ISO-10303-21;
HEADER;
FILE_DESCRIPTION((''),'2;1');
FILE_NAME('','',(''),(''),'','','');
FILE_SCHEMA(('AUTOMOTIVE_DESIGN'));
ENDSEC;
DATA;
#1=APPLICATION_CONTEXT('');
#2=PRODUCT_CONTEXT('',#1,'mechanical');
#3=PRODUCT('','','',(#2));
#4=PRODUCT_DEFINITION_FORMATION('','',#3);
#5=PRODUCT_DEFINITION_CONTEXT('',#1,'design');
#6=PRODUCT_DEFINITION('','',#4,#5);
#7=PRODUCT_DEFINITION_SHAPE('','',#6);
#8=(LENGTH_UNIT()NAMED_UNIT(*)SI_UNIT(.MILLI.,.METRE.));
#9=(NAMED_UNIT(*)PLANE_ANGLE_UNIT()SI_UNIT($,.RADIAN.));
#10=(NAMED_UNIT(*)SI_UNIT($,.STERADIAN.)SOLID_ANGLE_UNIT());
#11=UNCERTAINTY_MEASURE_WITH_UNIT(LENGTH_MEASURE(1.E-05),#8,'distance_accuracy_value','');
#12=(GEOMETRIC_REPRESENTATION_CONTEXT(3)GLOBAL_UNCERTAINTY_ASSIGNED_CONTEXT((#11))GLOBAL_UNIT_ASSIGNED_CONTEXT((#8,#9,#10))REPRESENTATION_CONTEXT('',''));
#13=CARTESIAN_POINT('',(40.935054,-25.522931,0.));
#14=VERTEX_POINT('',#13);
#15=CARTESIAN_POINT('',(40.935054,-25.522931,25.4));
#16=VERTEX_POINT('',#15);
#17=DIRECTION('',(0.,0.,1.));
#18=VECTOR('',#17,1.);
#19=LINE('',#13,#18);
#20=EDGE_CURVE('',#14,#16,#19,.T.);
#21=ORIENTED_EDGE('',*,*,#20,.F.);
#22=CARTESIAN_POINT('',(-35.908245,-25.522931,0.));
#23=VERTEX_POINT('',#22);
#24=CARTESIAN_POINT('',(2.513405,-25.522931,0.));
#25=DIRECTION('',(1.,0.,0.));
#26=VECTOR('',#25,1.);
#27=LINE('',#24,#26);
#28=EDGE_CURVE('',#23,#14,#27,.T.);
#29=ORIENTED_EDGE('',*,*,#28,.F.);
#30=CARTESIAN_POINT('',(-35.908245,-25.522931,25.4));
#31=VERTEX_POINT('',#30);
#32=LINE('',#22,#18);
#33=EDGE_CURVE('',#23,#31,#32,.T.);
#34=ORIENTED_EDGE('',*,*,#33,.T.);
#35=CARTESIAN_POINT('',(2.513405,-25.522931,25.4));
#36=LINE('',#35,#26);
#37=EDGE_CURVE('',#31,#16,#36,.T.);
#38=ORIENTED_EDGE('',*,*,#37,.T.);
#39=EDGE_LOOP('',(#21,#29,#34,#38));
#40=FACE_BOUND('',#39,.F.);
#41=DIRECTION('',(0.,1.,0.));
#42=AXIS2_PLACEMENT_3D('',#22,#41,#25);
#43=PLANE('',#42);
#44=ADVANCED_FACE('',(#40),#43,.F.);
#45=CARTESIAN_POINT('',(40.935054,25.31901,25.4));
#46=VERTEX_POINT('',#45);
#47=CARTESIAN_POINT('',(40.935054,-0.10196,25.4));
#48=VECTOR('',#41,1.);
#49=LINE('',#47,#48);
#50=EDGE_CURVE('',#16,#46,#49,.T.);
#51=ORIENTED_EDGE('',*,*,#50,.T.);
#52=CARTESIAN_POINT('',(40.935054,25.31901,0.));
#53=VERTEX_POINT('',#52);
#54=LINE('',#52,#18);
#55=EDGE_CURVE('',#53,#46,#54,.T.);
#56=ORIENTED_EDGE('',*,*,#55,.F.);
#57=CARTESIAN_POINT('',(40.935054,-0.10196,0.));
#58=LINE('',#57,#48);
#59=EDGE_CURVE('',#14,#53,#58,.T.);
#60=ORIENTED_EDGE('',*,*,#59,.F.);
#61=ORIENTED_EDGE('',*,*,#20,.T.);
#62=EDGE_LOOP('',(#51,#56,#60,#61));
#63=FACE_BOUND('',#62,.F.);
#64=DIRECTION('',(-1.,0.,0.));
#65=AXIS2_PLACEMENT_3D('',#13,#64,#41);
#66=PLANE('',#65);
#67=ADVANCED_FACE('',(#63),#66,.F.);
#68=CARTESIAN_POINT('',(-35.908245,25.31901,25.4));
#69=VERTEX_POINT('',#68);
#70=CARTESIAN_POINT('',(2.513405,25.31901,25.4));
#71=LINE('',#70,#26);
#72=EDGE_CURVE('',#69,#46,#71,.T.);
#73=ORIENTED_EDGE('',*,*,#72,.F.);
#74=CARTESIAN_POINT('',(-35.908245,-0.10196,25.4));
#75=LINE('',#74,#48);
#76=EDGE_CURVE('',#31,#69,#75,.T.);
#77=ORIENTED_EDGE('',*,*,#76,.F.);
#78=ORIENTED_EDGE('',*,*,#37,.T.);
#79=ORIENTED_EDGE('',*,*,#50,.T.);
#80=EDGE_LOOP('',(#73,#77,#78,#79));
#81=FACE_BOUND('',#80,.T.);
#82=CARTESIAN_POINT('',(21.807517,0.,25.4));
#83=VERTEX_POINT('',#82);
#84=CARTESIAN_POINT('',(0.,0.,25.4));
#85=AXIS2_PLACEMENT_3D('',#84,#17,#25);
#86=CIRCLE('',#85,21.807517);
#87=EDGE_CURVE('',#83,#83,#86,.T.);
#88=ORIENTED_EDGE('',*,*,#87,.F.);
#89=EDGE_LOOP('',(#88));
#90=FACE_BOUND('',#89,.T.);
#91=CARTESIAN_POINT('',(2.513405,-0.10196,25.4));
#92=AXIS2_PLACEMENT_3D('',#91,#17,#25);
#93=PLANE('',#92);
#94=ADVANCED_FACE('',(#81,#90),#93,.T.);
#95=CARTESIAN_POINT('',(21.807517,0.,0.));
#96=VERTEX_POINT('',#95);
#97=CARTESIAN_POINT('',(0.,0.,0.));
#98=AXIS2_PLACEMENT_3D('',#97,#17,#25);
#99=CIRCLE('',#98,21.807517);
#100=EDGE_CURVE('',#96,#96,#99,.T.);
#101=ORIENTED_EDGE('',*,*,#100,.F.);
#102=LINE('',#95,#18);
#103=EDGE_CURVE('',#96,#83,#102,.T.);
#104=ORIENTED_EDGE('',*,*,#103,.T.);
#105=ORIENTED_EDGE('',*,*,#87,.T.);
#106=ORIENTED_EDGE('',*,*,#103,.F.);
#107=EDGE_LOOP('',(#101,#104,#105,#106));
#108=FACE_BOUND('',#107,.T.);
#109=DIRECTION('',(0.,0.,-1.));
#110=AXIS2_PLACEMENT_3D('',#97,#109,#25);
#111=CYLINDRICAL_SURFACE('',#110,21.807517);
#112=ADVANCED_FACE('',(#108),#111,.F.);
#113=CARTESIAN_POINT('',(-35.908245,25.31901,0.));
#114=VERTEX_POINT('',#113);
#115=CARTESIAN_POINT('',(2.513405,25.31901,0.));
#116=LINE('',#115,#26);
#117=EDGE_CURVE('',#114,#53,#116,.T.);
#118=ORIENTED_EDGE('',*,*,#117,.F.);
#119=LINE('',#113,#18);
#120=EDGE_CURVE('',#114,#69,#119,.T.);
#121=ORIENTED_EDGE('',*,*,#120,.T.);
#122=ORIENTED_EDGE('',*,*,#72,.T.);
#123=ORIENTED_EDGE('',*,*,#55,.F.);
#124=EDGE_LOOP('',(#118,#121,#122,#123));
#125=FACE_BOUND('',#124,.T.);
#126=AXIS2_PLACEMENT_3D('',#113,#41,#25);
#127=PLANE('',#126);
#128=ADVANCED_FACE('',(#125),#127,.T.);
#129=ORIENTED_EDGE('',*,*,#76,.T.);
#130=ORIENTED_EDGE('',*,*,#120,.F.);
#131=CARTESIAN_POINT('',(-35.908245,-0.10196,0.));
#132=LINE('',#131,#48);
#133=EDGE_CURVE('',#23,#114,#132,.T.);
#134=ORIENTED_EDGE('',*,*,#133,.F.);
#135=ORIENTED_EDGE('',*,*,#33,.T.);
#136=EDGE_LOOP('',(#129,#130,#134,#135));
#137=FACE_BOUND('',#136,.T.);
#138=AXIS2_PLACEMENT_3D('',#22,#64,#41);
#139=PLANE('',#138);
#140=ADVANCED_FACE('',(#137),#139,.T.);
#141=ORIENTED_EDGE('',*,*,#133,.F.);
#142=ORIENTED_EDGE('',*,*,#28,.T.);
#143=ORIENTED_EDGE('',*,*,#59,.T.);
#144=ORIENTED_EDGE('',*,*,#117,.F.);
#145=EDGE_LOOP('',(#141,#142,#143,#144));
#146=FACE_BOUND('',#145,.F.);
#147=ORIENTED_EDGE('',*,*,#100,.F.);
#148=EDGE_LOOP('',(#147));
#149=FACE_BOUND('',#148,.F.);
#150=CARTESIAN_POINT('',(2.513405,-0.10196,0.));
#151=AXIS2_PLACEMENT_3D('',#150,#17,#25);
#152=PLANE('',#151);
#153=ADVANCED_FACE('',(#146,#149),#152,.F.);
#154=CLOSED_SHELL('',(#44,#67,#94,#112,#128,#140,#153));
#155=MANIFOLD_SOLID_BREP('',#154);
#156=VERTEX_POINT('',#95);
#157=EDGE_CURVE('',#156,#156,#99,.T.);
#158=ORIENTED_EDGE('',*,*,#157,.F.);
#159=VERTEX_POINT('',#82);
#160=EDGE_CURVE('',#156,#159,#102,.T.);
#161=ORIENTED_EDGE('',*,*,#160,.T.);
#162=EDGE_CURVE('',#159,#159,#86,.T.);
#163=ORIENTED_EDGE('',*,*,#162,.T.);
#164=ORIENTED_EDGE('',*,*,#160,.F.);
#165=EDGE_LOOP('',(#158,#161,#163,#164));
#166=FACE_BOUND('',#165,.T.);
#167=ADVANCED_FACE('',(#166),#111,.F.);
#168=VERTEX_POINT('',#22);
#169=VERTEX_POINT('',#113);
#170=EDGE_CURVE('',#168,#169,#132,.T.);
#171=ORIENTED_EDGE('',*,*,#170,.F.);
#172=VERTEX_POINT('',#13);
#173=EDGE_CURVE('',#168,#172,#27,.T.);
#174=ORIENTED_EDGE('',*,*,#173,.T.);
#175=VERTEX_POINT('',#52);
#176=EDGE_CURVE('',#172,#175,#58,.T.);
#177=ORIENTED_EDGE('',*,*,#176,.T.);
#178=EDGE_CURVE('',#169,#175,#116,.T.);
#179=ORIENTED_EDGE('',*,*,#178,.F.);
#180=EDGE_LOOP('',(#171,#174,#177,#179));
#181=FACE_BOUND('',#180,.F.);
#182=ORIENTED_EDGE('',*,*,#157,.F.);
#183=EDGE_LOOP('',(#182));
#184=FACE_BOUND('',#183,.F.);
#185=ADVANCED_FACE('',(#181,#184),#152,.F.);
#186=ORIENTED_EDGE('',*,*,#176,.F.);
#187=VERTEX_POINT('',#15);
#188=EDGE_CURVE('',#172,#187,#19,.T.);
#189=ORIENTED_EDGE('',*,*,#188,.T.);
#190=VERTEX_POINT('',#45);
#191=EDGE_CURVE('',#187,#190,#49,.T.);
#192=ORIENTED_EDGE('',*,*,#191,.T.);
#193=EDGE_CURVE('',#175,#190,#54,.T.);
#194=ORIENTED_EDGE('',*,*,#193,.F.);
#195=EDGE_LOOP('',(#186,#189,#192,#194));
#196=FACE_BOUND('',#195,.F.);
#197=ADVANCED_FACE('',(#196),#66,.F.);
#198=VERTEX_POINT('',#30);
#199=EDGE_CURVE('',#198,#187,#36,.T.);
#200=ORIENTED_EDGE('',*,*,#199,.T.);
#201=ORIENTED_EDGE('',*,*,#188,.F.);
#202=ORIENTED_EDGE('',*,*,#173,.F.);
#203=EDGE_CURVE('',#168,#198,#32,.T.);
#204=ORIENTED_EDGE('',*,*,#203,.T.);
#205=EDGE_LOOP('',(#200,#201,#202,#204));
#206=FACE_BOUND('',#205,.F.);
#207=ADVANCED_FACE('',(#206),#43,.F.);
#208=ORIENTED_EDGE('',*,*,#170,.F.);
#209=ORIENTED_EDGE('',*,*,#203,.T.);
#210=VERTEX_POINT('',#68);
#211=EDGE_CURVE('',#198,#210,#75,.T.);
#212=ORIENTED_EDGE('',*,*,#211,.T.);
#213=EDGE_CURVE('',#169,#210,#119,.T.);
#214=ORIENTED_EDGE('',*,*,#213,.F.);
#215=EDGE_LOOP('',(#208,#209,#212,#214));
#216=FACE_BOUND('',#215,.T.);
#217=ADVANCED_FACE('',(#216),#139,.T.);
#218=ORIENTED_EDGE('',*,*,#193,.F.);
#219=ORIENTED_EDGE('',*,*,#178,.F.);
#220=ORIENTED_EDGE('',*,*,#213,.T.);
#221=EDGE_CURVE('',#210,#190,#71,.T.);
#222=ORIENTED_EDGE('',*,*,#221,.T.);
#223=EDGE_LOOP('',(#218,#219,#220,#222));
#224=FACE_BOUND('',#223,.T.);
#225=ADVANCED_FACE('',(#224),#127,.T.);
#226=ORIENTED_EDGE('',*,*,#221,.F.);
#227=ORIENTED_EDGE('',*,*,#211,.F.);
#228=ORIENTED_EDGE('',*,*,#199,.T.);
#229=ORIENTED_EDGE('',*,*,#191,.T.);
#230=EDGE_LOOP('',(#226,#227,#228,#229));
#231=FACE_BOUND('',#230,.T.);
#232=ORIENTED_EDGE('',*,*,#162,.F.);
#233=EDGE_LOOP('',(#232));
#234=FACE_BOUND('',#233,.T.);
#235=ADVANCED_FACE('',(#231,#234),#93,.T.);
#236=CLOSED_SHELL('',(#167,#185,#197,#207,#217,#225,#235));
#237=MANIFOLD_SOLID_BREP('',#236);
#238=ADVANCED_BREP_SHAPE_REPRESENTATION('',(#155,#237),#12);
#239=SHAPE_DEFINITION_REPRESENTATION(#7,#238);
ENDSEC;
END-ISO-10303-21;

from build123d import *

# Parameters (mm, degrees)
F0_W     = 76.8432989717
F0_H     = 50.8419405669
F0_R     = 21.8075174345
F1_DEPTH = 25.4
F2_DEPTH = 25.4


# Not quite as in the source:
# - the program builds the solid bodies; features that only make, move or delete a surface that nothing else refers to are left out


with BuildPart() as f1:
    # F0 (on Top) → F1 (new body)
    with BuildSketch(Plane.XY):
        with Locations((2.5134049356, -0.1019602641)):
            Rectangle(F0_W, F0_H)
        Circle(F0_R, mode=Mode.SUBTRACT)
    extrude(amount=F1_DEPTH)


with BuildPart() as f2:
    # F0 (on Top) → F2 (new body)
    with BuildSketch(Plane.XY):
        with Locations((2.5134049356, -0.1019602641)):
            Rectangle(F0_W, F0_H)
        Circle(F0_R, mode=Mode.SUBTRACT)
    extrude(amount=F2_DEPTH)


solid = Compound([f1.part, f2.part])
